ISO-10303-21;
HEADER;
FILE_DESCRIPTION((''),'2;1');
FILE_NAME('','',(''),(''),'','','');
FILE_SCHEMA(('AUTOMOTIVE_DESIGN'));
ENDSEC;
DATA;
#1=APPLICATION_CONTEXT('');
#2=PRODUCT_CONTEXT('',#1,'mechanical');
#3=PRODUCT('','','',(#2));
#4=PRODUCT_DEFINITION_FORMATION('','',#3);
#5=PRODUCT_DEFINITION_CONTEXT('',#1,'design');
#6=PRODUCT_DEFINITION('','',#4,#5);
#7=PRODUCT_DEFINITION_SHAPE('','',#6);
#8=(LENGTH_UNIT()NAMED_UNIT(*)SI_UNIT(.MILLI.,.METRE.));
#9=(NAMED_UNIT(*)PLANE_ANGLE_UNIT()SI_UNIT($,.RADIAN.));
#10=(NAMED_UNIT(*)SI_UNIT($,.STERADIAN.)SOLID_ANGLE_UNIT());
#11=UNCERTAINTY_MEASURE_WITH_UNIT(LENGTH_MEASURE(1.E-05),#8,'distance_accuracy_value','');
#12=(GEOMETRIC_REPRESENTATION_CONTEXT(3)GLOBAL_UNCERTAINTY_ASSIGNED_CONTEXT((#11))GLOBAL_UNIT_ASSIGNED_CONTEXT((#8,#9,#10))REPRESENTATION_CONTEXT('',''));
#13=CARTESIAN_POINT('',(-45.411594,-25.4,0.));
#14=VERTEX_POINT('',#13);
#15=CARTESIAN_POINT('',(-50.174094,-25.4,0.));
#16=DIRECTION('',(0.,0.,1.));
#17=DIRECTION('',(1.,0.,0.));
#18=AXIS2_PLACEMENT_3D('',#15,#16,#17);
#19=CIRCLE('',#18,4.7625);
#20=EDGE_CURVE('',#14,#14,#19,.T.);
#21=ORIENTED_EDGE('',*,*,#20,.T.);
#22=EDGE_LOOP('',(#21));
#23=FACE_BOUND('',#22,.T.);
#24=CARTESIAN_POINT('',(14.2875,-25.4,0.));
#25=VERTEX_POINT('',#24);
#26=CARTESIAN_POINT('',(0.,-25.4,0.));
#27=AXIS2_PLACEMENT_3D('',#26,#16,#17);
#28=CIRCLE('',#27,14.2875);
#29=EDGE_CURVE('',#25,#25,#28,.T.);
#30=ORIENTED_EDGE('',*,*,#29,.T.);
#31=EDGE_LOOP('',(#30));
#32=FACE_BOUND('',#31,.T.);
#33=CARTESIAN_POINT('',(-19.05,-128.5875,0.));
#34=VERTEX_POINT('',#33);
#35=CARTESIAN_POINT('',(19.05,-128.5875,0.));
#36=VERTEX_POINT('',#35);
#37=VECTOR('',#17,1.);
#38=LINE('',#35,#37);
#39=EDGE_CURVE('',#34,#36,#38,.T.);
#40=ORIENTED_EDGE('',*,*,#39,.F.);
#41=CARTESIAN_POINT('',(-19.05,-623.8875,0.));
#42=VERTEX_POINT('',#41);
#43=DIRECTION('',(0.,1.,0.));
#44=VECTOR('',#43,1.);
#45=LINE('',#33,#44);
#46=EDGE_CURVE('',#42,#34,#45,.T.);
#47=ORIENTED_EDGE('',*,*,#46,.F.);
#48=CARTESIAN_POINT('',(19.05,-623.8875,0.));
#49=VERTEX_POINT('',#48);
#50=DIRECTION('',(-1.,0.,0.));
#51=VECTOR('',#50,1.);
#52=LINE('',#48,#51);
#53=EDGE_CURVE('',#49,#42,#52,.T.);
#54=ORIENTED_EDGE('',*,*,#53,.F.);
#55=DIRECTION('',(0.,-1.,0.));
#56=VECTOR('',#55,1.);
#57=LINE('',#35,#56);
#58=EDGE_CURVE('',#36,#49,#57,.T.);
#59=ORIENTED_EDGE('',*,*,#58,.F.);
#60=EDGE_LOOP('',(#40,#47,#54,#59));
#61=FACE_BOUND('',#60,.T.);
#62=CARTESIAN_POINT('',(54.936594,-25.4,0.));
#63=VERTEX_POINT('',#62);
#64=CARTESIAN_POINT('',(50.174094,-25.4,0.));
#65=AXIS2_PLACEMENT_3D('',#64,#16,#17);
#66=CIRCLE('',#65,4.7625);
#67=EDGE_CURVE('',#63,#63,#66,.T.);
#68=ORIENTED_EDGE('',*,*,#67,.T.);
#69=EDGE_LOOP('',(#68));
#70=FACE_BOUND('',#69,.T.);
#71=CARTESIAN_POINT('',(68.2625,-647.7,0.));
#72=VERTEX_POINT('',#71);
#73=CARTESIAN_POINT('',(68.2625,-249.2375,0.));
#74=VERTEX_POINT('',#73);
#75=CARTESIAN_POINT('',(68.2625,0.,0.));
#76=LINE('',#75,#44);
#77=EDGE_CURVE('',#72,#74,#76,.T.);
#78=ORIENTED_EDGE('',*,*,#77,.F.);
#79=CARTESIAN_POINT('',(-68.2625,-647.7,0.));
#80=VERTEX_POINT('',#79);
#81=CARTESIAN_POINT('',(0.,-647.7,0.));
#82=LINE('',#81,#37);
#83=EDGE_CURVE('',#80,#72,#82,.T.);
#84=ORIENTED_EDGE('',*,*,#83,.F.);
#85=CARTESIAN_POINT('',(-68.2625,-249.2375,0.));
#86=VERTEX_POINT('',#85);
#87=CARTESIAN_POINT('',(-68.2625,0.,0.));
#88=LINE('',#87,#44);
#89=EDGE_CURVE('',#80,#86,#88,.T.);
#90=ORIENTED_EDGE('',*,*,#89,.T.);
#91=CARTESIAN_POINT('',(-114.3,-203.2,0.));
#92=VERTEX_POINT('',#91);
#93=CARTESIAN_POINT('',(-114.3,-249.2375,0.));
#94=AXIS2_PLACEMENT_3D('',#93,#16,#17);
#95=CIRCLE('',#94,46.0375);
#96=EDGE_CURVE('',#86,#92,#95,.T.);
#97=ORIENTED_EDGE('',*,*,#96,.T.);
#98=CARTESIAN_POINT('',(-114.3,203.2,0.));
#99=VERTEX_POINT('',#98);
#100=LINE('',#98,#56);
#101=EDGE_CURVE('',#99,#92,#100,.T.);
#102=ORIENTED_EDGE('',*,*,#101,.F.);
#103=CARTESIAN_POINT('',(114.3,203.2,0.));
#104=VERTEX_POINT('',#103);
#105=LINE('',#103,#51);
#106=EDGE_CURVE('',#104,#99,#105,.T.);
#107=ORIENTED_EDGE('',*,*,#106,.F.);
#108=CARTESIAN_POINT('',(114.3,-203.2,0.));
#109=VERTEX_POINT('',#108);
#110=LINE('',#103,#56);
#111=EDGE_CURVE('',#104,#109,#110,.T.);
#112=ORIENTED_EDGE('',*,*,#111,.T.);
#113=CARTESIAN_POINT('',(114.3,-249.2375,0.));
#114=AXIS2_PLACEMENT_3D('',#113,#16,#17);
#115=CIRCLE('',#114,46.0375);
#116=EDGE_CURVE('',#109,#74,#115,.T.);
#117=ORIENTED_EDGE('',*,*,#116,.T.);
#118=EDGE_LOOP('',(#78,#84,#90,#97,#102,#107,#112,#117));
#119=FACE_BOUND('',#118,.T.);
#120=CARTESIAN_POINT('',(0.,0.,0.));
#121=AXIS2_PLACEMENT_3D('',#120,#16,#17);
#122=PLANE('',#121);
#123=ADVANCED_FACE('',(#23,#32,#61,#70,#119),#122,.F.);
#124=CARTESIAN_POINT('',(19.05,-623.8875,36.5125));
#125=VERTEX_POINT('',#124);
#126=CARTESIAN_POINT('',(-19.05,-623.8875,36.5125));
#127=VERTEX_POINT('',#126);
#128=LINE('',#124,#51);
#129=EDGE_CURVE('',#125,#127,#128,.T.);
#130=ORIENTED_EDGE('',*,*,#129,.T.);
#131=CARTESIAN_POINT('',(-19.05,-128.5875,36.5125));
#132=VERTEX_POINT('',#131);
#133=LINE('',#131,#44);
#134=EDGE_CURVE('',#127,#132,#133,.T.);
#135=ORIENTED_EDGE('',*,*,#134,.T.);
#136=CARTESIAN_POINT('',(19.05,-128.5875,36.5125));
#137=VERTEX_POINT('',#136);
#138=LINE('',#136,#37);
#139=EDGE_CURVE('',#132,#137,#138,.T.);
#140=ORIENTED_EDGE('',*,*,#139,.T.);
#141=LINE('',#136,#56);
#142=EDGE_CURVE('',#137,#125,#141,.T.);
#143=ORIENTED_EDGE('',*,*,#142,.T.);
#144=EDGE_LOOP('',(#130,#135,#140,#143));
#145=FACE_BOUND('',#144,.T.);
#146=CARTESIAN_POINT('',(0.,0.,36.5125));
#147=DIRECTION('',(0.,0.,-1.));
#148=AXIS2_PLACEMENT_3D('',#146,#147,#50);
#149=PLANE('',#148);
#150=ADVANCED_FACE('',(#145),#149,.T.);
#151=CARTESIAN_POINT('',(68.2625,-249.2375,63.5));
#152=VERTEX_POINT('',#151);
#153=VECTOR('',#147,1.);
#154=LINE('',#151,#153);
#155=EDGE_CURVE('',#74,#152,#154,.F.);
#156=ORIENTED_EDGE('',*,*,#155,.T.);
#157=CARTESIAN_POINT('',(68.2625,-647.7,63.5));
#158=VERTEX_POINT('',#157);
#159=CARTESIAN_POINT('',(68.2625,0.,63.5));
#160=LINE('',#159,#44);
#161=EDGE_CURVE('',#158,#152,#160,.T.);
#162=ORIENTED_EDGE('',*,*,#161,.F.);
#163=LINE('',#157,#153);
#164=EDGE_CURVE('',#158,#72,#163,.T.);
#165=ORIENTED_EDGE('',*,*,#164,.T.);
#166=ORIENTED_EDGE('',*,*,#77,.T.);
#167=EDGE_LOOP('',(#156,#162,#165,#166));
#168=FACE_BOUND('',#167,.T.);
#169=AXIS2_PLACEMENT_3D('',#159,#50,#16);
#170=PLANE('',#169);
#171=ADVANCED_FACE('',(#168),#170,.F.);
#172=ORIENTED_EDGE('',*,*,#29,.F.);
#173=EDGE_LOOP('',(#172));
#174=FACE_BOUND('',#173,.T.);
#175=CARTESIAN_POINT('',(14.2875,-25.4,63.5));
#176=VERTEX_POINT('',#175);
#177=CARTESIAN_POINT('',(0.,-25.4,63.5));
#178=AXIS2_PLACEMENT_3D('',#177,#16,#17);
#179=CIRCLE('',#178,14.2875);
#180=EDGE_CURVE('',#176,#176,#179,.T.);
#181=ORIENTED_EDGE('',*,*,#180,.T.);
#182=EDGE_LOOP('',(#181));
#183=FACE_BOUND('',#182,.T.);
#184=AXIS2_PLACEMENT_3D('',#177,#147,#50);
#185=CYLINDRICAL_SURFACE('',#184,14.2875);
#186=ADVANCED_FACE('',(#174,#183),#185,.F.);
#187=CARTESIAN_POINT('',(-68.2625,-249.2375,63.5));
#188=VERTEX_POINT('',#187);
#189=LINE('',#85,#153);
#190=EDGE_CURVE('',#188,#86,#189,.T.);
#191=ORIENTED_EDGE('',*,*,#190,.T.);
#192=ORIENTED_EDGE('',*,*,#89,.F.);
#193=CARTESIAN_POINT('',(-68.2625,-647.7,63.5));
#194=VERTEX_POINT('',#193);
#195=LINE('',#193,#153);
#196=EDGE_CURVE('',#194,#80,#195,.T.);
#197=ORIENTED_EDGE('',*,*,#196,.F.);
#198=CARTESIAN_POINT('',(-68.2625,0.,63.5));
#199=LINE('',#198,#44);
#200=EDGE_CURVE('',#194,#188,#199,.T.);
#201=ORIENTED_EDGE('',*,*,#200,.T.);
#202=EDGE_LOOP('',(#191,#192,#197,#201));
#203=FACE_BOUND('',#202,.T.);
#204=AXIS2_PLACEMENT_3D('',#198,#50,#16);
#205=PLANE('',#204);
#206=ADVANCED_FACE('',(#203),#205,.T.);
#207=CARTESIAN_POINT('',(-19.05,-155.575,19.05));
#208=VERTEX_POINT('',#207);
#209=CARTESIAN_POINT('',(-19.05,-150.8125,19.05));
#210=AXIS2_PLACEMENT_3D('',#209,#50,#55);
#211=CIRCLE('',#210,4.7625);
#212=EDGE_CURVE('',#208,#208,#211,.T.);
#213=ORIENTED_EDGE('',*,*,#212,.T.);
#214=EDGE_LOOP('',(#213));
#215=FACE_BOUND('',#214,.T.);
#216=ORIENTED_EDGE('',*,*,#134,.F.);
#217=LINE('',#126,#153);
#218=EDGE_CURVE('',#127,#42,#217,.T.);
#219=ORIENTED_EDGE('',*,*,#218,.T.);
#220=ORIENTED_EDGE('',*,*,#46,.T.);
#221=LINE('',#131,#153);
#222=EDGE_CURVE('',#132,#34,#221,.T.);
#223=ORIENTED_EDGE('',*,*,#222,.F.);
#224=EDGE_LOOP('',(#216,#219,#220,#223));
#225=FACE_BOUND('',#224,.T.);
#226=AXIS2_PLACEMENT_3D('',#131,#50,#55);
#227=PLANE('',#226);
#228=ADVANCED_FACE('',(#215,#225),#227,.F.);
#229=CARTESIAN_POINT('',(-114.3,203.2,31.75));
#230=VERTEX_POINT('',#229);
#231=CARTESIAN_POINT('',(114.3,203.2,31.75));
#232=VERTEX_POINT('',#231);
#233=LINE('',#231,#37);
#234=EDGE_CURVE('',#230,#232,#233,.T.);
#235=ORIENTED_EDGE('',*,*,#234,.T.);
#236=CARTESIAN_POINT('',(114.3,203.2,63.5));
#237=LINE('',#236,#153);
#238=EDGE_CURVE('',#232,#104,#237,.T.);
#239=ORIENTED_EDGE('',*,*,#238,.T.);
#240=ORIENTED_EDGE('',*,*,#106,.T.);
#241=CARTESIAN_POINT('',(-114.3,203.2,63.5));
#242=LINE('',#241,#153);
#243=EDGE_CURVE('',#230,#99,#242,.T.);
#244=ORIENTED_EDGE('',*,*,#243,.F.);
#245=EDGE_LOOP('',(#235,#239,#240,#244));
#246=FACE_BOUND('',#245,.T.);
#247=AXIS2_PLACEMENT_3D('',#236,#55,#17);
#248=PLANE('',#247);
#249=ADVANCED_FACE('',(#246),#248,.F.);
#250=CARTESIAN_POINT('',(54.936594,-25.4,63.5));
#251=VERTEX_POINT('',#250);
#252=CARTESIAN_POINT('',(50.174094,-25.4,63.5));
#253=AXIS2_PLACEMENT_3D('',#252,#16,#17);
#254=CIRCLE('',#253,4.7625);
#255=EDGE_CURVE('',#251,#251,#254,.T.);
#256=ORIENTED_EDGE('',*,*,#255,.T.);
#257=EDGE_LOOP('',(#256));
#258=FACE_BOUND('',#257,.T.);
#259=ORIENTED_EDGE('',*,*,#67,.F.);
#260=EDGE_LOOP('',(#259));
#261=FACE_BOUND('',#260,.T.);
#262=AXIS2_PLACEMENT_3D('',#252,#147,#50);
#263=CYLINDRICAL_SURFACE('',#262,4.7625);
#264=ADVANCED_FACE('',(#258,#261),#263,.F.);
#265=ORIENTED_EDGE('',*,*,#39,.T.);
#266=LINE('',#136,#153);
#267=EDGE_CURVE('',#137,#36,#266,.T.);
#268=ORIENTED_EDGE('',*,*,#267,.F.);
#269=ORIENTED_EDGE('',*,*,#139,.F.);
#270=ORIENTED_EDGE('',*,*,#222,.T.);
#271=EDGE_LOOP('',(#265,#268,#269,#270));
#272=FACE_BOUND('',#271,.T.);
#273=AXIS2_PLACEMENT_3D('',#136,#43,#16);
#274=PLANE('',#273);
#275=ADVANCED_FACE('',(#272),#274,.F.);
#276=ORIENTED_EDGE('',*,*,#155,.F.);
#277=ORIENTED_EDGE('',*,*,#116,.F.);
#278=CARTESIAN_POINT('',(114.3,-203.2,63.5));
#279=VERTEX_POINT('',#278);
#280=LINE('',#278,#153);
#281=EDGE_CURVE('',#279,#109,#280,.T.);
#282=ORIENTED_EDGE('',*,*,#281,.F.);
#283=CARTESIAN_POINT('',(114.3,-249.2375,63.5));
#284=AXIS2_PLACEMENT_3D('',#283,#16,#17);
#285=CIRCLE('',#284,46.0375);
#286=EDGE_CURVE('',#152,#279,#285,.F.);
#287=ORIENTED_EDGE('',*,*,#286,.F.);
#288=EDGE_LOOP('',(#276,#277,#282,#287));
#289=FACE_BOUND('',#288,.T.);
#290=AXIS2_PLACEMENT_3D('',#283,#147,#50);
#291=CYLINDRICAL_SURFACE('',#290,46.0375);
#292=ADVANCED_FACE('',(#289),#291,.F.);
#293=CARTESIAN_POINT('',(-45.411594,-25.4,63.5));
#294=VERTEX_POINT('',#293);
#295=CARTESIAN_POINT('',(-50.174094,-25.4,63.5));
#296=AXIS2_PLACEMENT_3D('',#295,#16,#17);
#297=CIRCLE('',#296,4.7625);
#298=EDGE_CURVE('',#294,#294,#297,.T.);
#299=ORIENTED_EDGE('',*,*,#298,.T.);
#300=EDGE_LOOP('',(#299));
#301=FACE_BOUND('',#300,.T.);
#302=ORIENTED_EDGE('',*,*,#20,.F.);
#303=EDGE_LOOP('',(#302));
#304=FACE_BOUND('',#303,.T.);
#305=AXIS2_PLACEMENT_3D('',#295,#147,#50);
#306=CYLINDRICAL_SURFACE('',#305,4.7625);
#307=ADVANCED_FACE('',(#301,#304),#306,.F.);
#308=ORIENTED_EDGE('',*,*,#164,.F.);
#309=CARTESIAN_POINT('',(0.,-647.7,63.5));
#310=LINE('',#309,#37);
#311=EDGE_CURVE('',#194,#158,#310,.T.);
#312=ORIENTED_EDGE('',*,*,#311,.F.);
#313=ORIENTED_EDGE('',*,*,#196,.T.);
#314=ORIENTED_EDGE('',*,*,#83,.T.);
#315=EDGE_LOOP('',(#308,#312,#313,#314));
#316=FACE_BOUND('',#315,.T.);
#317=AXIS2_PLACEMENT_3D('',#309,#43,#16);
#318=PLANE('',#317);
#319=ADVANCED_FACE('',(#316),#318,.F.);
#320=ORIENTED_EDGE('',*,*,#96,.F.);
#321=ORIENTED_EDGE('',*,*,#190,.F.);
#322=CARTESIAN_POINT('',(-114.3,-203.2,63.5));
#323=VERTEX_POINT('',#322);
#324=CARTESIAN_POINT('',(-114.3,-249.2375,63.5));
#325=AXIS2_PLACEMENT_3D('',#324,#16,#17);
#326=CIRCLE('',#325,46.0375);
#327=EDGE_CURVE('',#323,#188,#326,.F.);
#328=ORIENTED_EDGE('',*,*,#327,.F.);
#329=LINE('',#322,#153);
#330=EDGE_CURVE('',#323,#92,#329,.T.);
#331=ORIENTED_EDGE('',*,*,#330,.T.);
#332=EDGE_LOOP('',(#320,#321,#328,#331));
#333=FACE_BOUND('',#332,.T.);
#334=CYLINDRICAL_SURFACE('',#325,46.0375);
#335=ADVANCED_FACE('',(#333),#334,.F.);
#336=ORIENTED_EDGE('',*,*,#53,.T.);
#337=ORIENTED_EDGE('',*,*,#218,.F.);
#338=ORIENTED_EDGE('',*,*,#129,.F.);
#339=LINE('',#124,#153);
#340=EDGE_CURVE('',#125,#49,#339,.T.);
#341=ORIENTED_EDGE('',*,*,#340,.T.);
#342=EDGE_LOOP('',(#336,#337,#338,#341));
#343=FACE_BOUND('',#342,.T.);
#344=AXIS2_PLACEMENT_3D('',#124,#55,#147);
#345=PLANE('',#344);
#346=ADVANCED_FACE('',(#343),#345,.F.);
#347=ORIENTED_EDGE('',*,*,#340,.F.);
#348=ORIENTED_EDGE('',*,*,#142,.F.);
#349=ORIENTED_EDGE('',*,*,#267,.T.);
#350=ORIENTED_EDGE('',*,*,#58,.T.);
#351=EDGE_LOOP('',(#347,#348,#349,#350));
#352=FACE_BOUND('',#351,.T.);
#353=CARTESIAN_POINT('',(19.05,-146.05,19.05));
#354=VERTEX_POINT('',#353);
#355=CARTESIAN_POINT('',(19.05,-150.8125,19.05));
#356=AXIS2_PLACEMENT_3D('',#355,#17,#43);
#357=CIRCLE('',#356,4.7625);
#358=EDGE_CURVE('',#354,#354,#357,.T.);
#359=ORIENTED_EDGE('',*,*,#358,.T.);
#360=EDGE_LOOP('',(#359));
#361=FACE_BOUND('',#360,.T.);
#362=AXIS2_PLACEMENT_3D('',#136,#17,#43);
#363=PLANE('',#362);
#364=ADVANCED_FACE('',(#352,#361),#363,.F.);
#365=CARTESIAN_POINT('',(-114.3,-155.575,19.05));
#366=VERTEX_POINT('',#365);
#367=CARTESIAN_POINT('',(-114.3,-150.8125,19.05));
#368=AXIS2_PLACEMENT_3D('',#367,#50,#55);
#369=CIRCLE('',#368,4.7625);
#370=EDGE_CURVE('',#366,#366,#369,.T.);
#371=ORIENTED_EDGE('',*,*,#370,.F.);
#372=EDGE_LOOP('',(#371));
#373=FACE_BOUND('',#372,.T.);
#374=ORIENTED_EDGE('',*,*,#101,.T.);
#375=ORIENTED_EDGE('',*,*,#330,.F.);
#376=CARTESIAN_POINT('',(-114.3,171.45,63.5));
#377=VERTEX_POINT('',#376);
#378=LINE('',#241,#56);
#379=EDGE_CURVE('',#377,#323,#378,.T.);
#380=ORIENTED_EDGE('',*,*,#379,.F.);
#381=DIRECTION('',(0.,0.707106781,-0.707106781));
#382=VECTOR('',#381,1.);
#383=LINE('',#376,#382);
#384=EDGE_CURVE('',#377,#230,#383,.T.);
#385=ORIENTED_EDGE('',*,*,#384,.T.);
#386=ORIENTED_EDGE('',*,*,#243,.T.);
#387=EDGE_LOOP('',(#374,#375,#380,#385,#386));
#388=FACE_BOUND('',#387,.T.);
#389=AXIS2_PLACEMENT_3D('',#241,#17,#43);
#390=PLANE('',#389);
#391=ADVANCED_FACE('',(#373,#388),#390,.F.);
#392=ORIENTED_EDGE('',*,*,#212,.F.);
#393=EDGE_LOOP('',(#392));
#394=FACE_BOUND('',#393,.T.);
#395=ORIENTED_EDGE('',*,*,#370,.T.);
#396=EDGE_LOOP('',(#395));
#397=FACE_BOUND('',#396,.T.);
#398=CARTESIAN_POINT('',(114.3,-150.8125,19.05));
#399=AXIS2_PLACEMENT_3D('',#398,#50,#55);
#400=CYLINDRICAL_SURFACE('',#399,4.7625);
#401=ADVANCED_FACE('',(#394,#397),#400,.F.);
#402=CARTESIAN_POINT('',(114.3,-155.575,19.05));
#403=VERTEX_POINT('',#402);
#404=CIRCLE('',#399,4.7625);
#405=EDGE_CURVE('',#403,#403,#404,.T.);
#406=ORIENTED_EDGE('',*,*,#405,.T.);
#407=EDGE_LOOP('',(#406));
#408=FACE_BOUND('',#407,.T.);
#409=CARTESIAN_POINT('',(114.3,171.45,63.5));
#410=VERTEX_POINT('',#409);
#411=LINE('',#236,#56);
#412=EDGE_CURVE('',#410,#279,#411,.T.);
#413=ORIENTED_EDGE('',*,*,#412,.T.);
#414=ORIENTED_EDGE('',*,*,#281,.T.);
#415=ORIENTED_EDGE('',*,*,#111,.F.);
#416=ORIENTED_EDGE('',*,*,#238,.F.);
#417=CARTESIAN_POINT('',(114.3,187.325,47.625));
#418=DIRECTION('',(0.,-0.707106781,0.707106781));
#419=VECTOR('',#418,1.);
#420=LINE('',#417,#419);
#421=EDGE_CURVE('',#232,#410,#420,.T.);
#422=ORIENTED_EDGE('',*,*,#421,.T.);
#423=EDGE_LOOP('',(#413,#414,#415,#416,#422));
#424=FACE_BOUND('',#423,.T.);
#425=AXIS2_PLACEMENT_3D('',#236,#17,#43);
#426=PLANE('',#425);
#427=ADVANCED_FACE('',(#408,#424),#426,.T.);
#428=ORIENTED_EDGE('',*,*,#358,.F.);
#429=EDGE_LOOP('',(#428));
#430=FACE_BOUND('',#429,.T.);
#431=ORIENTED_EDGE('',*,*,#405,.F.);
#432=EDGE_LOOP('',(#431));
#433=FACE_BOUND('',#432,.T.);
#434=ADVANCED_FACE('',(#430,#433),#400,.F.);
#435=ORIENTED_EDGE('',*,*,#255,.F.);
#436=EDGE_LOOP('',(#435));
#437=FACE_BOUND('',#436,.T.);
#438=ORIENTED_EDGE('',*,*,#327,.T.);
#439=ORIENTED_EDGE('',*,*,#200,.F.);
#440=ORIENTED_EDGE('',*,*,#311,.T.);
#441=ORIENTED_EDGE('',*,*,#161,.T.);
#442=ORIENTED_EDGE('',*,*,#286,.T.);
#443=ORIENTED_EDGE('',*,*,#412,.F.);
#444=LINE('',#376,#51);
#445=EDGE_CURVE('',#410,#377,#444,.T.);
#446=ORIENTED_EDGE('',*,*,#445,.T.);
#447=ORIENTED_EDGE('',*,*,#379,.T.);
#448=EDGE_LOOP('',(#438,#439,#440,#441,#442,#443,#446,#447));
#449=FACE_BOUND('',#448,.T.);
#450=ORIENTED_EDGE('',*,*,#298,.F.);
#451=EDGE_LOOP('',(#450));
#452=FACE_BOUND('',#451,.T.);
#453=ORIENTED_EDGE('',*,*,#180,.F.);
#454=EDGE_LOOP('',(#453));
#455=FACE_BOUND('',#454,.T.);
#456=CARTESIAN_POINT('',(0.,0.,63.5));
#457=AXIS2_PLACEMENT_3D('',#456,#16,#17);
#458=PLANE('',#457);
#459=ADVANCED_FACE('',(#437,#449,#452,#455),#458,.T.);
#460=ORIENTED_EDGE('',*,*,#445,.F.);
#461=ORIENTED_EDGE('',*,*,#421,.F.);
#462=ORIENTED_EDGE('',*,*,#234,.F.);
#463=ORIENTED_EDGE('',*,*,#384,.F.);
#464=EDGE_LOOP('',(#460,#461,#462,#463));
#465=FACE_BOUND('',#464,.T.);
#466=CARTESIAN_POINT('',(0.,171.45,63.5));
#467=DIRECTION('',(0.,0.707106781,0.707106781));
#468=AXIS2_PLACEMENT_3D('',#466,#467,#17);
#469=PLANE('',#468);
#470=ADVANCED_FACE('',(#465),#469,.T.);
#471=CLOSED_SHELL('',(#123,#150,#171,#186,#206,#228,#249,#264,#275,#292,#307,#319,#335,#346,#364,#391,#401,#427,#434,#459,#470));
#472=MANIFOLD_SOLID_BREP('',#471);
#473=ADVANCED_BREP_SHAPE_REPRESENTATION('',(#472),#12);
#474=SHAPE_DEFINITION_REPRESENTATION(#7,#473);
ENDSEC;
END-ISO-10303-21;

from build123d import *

# Parameters (mm, degrees)
SKETCH1_W           = 228.6
SKETCH1_H           = 406.4
SKETCH1_R           = 14.2875
SKETCH1_R_2         = 4.7625
SKETCH1_W_2         = 136.525
SKETCH1_H_2         = 444.5
BOSS_EXTRUDE1_DEPTH = 63.5
SKETCH2_W           = 38.1
SKETCH2_H           = 495.3
CUT_EXTRUDE1_DEPTH  = 36.5125
SKETCH3_R           = 4.7625
CUT_EXTRUDE2_DEPTH  = 690.786561191
FILLET1_R           = 46.0375
CHAMFER1_SIZE       = 31.75


with BuildPart() as part:
    # Sketch1 → Boss-Extrude1 (new body)
    # profile 1 of 2: a face of its own
    with BuildSketch(Plane.XY):
        Rectangle(SKETCH1_W, SKETCH1_H)
        with Locations((0, -25.4)):
            Circle(SKETCH1_R, mode=Mode.SUBTRACT)
        with Locations((-50.174093823, -25.4)):
            Circle(SKETCH1_R_2, mode=Mode.SUBTRACT)
        with Locations((50.174093823, -25.4)):
            Circle(SKETCH1_R_2, mode=Mode.SUBTRACT)
    # profile 2 of 2: a face of its own
    with BuildSketch(Plane.XY):
        with Locations((0, -425.45)):
            Rectangle(SKETCH1_W_2, SKETCH1_H_2)
    extrude(amount=BOSS_EXTRUDE1_DEPTH)

    # Sketch2 → Cut-Extrude1 (cut)
    with BuildSketch(Plane(origin=(0, 0, 0), x_dir=(-1, 0, 0), z_dir=(0, 0, -1))):
        with Locations((0, -376.2375)):
            Rectangle(SKETCH2_W, SKETCH2_H)
    extrude(amount=-CUT_EXTRUDE1_DEPTH, mode=Mode.SUBTRACT)

    # Sketch3 → Cut-Extrude2 (cut, through all)
    with BuildSketch(Plane.ZY.offset(114.3)):
        with Locations(Location((19.05, -150.8125, 0), (0, 0, 270))):
            Circle(SKETCH3_R)
    extrude(amount=-CUT_EXTRUDE2_DEPTH, mode=Mode.SUBTRACT)

    # Fillet1
    fillet1_edges = [part.edges().sort_by_distance(p)[0] for p in [
        (68.2625, -203.2, 31.75),
        (-68.2625, -203.2, 31.75),
    ]]
    fillet(fillet1_edges, radius=FILLET1_R - 0.0001)  # a hair under: the kernel refuses the full size

    # Chamfer1
    chamfer1_edges = [part.edges().sort_by_distance(p)[0] for p in [
        (0, 203.2, 63.5),
    ]]
    chamfer(chamfer1_edges, length=CHAMFER1_SIZE)


solid = part.part
